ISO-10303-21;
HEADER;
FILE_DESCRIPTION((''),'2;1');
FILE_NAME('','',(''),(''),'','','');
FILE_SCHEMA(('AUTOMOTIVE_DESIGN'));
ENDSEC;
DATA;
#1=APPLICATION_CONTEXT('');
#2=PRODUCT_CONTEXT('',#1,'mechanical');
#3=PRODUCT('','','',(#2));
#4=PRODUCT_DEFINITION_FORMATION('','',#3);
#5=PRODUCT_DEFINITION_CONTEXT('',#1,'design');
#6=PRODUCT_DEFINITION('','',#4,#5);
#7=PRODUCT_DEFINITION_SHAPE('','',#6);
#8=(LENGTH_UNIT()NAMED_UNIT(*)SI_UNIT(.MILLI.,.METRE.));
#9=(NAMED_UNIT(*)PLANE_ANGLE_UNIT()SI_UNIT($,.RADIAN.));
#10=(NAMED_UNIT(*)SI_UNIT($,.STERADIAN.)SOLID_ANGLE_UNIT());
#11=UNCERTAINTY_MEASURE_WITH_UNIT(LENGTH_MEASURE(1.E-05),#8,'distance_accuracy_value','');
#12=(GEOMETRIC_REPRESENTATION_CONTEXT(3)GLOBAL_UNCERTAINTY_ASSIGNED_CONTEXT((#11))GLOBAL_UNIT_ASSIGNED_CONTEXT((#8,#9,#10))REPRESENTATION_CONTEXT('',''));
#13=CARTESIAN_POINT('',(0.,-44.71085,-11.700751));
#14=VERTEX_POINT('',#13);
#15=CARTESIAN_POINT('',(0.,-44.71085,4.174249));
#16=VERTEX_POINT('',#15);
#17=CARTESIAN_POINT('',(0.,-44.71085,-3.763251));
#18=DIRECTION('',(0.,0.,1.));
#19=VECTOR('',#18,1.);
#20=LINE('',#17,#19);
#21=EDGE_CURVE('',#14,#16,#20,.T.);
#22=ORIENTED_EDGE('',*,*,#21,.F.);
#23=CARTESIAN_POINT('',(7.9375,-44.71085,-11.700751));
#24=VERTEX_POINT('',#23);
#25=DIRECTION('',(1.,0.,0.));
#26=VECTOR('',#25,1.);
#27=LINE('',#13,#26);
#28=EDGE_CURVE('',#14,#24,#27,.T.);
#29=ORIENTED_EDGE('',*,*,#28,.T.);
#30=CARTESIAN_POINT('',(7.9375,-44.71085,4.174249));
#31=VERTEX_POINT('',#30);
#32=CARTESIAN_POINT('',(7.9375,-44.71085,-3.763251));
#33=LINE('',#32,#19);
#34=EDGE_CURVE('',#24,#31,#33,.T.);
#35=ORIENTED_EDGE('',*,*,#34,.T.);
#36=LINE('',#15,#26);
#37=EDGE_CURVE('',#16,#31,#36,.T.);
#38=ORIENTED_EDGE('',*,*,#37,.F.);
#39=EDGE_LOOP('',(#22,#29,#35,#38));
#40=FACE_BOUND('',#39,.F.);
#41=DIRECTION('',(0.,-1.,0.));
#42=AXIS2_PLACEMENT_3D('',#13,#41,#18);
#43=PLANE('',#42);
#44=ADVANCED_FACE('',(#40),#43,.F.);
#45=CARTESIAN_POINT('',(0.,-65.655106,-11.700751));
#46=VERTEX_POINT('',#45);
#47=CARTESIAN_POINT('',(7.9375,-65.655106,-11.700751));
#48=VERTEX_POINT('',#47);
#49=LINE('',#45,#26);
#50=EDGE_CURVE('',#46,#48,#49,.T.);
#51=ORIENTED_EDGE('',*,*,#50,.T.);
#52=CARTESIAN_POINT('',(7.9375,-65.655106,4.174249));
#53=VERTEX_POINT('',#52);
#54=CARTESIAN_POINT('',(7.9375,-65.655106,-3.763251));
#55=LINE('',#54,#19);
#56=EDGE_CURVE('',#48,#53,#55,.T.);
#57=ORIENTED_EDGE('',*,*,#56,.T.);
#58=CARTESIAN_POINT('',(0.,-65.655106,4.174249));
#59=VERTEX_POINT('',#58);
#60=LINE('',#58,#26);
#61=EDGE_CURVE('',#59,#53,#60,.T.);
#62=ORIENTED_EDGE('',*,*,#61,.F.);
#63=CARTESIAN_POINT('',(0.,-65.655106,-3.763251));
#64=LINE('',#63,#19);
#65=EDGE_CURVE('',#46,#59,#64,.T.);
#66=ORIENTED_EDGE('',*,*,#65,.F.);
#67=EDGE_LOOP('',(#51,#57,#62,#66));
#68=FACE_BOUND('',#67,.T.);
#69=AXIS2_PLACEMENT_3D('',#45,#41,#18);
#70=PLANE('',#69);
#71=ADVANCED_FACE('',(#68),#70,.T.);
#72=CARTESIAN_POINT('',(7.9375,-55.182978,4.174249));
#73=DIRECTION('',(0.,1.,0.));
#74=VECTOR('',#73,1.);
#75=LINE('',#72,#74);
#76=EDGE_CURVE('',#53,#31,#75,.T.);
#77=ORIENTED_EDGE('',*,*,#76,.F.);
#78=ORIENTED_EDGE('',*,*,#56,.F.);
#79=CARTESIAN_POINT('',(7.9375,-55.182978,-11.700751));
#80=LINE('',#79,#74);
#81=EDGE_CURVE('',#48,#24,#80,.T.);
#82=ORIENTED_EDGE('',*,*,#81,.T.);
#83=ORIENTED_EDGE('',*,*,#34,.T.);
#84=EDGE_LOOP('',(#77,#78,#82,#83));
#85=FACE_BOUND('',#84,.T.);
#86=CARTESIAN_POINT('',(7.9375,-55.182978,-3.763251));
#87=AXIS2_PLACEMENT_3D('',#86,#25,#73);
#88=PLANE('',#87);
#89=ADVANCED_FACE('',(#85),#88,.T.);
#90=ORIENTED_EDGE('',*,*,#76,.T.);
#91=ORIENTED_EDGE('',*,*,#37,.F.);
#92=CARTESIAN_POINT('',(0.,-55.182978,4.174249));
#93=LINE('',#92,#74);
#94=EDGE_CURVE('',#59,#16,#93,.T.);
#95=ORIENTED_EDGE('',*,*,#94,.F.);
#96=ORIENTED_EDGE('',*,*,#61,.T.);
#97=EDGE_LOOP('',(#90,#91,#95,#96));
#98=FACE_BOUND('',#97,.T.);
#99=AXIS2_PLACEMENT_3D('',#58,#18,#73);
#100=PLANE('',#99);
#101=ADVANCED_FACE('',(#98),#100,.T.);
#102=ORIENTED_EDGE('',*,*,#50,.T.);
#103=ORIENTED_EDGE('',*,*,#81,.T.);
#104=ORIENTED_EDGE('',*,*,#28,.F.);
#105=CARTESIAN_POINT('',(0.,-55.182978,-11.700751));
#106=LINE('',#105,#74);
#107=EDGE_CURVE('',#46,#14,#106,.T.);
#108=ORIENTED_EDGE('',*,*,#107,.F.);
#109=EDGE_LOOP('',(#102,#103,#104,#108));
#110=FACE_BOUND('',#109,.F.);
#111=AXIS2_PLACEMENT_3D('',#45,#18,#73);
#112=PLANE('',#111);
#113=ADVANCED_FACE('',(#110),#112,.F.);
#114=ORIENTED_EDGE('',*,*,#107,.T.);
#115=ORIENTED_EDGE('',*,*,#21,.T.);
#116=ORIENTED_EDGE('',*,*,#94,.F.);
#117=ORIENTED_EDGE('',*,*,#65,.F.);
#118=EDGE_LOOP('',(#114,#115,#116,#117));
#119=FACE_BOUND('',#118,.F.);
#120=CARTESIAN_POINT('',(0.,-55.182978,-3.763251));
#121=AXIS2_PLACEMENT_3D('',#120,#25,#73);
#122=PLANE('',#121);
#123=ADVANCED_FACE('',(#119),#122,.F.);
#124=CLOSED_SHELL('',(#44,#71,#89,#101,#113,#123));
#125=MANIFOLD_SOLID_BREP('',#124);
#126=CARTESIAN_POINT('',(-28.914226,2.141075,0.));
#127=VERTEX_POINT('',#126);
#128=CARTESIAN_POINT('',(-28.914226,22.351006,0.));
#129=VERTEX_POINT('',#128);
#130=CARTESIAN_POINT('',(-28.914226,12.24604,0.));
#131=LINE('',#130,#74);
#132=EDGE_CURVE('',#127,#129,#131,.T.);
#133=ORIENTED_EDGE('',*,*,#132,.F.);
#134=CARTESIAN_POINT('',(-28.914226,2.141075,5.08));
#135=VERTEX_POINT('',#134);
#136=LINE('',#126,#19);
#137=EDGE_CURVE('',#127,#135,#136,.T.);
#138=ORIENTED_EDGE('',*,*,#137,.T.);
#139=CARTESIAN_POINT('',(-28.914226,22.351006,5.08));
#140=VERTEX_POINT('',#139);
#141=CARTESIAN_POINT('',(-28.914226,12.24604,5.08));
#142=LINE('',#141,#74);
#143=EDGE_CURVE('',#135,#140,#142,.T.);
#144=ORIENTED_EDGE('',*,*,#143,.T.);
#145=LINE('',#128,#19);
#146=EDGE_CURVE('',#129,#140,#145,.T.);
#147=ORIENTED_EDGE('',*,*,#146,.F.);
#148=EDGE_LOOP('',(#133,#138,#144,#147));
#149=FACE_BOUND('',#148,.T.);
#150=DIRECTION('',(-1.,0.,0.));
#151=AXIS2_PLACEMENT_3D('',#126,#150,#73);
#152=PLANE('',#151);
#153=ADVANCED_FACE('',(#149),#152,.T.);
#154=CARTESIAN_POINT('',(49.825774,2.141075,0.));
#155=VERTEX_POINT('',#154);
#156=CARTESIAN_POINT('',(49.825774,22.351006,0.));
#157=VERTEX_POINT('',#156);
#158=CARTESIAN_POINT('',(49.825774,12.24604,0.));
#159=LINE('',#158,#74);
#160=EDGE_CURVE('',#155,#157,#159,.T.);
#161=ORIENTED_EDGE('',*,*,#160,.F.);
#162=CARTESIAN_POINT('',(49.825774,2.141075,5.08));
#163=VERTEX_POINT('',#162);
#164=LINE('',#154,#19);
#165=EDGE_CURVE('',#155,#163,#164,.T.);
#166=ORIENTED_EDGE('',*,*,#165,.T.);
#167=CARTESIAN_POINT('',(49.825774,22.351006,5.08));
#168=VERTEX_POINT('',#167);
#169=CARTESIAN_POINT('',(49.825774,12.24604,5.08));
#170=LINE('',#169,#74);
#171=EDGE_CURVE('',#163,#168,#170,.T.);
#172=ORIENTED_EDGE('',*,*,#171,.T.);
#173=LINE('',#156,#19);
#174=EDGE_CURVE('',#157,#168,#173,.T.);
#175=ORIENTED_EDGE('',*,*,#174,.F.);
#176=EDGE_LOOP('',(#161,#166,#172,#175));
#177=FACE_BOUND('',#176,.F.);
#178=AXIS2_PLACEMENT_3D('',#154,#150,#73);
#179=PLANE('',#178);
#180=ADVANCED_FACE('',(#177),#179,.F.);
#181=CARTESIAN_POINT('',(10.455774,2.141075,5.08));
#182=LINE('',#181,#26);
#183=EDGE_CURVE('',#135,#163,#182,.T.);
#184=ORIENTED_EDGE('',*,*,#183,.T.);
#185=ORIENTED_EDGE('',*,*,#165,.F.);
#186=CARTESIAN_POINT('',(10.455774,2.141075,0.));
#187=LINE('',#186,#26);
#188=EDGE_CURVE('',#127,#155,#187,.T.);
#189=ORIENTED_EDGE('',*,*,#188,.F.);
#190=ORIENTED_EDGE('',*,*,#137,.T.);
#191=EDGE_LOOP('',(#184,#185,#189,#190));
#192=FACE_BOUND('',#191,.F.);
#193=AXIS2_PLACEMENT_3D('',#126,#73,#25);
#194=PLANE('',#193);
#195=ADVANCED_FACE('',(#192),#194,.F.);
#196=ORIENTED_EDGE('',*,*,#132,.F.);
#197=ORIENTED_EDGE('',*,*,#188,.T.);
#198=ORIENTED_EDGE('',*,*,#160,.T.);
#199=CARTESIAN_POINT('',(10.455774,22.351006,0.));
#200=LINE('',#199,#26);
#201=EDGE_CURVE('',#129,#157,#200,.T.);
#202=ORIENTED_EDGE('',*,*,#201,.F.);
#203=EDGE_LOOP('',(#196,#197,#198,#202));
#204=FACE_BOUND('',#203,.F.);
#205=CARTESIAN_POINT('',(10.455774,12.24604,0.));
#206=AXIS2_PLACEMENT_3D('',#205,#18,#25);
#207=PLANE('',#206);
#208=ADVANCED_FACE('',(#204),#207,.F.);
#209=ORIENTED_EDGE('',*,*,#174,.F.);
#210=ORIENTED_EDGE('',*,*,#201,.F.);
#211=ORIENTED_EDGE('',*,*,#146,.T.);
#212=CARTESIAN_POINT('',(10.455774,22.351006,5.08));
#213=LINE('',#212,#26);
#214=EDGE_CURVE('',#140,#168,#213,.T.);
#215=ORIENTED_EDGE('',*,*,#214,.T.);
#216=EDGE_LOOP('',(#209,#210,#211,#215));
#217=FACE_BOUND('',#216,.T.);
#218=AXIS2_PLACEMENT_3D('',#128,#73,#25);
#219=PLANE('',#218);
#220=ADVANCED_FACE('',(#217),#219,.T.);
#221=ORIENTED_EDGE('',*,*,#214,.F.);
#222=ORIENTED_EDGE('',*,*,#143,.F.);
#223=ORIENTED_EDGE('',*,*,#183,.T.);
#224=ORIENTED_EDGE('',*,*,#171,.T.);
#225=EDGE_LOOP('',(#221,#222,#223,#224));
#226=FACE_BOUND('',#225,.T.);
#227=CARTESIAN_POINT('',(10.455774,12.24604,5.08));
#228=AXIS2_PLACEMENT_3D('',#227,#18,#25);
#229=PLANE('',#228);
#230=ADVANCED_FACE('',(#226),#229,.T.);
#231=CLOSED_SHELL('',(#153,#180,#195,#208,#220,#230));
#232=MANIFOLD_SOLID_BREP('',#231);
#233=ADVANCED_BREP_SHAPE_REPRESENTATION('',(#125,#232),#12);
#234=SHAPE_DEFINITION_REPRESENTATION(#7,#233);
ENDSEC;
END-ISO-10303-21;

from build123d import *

# Parameters (mm, degrees)
F0_W     = 20.9442564005
F0_H     = 15.875
F1_DEPTH = 7.9375
F3_W     = 78.74
F3_H     = 20.2099310613
F4_DEPTH = 5.08


# Not quite as in the source:
# - the program builds the solid bodies; features that only make, move or delete a surface that nothing else refers to are left out


with BuildPart() as f1:
    # F0 (on Right) → F1 (new body)
    with BuildSketch(Plane.YZ):
        with Locations((-55.1829777162, -3.7632510066)):
            Rectangle(F0_W, F0_H)
    extrude(amount=F1_DEPTH)


with BuildPart() as f4:
    # F3 (on Top) → F4 (new body)
    with BuildSketch(Plane.XY):
        with Locations((10.4557741433, 12.2460403945)):
            Rectangle(F3_W, F3_H)
    extrude(amount=F4_DEPTH)


solid = Compound([f1.part, f4.part])
